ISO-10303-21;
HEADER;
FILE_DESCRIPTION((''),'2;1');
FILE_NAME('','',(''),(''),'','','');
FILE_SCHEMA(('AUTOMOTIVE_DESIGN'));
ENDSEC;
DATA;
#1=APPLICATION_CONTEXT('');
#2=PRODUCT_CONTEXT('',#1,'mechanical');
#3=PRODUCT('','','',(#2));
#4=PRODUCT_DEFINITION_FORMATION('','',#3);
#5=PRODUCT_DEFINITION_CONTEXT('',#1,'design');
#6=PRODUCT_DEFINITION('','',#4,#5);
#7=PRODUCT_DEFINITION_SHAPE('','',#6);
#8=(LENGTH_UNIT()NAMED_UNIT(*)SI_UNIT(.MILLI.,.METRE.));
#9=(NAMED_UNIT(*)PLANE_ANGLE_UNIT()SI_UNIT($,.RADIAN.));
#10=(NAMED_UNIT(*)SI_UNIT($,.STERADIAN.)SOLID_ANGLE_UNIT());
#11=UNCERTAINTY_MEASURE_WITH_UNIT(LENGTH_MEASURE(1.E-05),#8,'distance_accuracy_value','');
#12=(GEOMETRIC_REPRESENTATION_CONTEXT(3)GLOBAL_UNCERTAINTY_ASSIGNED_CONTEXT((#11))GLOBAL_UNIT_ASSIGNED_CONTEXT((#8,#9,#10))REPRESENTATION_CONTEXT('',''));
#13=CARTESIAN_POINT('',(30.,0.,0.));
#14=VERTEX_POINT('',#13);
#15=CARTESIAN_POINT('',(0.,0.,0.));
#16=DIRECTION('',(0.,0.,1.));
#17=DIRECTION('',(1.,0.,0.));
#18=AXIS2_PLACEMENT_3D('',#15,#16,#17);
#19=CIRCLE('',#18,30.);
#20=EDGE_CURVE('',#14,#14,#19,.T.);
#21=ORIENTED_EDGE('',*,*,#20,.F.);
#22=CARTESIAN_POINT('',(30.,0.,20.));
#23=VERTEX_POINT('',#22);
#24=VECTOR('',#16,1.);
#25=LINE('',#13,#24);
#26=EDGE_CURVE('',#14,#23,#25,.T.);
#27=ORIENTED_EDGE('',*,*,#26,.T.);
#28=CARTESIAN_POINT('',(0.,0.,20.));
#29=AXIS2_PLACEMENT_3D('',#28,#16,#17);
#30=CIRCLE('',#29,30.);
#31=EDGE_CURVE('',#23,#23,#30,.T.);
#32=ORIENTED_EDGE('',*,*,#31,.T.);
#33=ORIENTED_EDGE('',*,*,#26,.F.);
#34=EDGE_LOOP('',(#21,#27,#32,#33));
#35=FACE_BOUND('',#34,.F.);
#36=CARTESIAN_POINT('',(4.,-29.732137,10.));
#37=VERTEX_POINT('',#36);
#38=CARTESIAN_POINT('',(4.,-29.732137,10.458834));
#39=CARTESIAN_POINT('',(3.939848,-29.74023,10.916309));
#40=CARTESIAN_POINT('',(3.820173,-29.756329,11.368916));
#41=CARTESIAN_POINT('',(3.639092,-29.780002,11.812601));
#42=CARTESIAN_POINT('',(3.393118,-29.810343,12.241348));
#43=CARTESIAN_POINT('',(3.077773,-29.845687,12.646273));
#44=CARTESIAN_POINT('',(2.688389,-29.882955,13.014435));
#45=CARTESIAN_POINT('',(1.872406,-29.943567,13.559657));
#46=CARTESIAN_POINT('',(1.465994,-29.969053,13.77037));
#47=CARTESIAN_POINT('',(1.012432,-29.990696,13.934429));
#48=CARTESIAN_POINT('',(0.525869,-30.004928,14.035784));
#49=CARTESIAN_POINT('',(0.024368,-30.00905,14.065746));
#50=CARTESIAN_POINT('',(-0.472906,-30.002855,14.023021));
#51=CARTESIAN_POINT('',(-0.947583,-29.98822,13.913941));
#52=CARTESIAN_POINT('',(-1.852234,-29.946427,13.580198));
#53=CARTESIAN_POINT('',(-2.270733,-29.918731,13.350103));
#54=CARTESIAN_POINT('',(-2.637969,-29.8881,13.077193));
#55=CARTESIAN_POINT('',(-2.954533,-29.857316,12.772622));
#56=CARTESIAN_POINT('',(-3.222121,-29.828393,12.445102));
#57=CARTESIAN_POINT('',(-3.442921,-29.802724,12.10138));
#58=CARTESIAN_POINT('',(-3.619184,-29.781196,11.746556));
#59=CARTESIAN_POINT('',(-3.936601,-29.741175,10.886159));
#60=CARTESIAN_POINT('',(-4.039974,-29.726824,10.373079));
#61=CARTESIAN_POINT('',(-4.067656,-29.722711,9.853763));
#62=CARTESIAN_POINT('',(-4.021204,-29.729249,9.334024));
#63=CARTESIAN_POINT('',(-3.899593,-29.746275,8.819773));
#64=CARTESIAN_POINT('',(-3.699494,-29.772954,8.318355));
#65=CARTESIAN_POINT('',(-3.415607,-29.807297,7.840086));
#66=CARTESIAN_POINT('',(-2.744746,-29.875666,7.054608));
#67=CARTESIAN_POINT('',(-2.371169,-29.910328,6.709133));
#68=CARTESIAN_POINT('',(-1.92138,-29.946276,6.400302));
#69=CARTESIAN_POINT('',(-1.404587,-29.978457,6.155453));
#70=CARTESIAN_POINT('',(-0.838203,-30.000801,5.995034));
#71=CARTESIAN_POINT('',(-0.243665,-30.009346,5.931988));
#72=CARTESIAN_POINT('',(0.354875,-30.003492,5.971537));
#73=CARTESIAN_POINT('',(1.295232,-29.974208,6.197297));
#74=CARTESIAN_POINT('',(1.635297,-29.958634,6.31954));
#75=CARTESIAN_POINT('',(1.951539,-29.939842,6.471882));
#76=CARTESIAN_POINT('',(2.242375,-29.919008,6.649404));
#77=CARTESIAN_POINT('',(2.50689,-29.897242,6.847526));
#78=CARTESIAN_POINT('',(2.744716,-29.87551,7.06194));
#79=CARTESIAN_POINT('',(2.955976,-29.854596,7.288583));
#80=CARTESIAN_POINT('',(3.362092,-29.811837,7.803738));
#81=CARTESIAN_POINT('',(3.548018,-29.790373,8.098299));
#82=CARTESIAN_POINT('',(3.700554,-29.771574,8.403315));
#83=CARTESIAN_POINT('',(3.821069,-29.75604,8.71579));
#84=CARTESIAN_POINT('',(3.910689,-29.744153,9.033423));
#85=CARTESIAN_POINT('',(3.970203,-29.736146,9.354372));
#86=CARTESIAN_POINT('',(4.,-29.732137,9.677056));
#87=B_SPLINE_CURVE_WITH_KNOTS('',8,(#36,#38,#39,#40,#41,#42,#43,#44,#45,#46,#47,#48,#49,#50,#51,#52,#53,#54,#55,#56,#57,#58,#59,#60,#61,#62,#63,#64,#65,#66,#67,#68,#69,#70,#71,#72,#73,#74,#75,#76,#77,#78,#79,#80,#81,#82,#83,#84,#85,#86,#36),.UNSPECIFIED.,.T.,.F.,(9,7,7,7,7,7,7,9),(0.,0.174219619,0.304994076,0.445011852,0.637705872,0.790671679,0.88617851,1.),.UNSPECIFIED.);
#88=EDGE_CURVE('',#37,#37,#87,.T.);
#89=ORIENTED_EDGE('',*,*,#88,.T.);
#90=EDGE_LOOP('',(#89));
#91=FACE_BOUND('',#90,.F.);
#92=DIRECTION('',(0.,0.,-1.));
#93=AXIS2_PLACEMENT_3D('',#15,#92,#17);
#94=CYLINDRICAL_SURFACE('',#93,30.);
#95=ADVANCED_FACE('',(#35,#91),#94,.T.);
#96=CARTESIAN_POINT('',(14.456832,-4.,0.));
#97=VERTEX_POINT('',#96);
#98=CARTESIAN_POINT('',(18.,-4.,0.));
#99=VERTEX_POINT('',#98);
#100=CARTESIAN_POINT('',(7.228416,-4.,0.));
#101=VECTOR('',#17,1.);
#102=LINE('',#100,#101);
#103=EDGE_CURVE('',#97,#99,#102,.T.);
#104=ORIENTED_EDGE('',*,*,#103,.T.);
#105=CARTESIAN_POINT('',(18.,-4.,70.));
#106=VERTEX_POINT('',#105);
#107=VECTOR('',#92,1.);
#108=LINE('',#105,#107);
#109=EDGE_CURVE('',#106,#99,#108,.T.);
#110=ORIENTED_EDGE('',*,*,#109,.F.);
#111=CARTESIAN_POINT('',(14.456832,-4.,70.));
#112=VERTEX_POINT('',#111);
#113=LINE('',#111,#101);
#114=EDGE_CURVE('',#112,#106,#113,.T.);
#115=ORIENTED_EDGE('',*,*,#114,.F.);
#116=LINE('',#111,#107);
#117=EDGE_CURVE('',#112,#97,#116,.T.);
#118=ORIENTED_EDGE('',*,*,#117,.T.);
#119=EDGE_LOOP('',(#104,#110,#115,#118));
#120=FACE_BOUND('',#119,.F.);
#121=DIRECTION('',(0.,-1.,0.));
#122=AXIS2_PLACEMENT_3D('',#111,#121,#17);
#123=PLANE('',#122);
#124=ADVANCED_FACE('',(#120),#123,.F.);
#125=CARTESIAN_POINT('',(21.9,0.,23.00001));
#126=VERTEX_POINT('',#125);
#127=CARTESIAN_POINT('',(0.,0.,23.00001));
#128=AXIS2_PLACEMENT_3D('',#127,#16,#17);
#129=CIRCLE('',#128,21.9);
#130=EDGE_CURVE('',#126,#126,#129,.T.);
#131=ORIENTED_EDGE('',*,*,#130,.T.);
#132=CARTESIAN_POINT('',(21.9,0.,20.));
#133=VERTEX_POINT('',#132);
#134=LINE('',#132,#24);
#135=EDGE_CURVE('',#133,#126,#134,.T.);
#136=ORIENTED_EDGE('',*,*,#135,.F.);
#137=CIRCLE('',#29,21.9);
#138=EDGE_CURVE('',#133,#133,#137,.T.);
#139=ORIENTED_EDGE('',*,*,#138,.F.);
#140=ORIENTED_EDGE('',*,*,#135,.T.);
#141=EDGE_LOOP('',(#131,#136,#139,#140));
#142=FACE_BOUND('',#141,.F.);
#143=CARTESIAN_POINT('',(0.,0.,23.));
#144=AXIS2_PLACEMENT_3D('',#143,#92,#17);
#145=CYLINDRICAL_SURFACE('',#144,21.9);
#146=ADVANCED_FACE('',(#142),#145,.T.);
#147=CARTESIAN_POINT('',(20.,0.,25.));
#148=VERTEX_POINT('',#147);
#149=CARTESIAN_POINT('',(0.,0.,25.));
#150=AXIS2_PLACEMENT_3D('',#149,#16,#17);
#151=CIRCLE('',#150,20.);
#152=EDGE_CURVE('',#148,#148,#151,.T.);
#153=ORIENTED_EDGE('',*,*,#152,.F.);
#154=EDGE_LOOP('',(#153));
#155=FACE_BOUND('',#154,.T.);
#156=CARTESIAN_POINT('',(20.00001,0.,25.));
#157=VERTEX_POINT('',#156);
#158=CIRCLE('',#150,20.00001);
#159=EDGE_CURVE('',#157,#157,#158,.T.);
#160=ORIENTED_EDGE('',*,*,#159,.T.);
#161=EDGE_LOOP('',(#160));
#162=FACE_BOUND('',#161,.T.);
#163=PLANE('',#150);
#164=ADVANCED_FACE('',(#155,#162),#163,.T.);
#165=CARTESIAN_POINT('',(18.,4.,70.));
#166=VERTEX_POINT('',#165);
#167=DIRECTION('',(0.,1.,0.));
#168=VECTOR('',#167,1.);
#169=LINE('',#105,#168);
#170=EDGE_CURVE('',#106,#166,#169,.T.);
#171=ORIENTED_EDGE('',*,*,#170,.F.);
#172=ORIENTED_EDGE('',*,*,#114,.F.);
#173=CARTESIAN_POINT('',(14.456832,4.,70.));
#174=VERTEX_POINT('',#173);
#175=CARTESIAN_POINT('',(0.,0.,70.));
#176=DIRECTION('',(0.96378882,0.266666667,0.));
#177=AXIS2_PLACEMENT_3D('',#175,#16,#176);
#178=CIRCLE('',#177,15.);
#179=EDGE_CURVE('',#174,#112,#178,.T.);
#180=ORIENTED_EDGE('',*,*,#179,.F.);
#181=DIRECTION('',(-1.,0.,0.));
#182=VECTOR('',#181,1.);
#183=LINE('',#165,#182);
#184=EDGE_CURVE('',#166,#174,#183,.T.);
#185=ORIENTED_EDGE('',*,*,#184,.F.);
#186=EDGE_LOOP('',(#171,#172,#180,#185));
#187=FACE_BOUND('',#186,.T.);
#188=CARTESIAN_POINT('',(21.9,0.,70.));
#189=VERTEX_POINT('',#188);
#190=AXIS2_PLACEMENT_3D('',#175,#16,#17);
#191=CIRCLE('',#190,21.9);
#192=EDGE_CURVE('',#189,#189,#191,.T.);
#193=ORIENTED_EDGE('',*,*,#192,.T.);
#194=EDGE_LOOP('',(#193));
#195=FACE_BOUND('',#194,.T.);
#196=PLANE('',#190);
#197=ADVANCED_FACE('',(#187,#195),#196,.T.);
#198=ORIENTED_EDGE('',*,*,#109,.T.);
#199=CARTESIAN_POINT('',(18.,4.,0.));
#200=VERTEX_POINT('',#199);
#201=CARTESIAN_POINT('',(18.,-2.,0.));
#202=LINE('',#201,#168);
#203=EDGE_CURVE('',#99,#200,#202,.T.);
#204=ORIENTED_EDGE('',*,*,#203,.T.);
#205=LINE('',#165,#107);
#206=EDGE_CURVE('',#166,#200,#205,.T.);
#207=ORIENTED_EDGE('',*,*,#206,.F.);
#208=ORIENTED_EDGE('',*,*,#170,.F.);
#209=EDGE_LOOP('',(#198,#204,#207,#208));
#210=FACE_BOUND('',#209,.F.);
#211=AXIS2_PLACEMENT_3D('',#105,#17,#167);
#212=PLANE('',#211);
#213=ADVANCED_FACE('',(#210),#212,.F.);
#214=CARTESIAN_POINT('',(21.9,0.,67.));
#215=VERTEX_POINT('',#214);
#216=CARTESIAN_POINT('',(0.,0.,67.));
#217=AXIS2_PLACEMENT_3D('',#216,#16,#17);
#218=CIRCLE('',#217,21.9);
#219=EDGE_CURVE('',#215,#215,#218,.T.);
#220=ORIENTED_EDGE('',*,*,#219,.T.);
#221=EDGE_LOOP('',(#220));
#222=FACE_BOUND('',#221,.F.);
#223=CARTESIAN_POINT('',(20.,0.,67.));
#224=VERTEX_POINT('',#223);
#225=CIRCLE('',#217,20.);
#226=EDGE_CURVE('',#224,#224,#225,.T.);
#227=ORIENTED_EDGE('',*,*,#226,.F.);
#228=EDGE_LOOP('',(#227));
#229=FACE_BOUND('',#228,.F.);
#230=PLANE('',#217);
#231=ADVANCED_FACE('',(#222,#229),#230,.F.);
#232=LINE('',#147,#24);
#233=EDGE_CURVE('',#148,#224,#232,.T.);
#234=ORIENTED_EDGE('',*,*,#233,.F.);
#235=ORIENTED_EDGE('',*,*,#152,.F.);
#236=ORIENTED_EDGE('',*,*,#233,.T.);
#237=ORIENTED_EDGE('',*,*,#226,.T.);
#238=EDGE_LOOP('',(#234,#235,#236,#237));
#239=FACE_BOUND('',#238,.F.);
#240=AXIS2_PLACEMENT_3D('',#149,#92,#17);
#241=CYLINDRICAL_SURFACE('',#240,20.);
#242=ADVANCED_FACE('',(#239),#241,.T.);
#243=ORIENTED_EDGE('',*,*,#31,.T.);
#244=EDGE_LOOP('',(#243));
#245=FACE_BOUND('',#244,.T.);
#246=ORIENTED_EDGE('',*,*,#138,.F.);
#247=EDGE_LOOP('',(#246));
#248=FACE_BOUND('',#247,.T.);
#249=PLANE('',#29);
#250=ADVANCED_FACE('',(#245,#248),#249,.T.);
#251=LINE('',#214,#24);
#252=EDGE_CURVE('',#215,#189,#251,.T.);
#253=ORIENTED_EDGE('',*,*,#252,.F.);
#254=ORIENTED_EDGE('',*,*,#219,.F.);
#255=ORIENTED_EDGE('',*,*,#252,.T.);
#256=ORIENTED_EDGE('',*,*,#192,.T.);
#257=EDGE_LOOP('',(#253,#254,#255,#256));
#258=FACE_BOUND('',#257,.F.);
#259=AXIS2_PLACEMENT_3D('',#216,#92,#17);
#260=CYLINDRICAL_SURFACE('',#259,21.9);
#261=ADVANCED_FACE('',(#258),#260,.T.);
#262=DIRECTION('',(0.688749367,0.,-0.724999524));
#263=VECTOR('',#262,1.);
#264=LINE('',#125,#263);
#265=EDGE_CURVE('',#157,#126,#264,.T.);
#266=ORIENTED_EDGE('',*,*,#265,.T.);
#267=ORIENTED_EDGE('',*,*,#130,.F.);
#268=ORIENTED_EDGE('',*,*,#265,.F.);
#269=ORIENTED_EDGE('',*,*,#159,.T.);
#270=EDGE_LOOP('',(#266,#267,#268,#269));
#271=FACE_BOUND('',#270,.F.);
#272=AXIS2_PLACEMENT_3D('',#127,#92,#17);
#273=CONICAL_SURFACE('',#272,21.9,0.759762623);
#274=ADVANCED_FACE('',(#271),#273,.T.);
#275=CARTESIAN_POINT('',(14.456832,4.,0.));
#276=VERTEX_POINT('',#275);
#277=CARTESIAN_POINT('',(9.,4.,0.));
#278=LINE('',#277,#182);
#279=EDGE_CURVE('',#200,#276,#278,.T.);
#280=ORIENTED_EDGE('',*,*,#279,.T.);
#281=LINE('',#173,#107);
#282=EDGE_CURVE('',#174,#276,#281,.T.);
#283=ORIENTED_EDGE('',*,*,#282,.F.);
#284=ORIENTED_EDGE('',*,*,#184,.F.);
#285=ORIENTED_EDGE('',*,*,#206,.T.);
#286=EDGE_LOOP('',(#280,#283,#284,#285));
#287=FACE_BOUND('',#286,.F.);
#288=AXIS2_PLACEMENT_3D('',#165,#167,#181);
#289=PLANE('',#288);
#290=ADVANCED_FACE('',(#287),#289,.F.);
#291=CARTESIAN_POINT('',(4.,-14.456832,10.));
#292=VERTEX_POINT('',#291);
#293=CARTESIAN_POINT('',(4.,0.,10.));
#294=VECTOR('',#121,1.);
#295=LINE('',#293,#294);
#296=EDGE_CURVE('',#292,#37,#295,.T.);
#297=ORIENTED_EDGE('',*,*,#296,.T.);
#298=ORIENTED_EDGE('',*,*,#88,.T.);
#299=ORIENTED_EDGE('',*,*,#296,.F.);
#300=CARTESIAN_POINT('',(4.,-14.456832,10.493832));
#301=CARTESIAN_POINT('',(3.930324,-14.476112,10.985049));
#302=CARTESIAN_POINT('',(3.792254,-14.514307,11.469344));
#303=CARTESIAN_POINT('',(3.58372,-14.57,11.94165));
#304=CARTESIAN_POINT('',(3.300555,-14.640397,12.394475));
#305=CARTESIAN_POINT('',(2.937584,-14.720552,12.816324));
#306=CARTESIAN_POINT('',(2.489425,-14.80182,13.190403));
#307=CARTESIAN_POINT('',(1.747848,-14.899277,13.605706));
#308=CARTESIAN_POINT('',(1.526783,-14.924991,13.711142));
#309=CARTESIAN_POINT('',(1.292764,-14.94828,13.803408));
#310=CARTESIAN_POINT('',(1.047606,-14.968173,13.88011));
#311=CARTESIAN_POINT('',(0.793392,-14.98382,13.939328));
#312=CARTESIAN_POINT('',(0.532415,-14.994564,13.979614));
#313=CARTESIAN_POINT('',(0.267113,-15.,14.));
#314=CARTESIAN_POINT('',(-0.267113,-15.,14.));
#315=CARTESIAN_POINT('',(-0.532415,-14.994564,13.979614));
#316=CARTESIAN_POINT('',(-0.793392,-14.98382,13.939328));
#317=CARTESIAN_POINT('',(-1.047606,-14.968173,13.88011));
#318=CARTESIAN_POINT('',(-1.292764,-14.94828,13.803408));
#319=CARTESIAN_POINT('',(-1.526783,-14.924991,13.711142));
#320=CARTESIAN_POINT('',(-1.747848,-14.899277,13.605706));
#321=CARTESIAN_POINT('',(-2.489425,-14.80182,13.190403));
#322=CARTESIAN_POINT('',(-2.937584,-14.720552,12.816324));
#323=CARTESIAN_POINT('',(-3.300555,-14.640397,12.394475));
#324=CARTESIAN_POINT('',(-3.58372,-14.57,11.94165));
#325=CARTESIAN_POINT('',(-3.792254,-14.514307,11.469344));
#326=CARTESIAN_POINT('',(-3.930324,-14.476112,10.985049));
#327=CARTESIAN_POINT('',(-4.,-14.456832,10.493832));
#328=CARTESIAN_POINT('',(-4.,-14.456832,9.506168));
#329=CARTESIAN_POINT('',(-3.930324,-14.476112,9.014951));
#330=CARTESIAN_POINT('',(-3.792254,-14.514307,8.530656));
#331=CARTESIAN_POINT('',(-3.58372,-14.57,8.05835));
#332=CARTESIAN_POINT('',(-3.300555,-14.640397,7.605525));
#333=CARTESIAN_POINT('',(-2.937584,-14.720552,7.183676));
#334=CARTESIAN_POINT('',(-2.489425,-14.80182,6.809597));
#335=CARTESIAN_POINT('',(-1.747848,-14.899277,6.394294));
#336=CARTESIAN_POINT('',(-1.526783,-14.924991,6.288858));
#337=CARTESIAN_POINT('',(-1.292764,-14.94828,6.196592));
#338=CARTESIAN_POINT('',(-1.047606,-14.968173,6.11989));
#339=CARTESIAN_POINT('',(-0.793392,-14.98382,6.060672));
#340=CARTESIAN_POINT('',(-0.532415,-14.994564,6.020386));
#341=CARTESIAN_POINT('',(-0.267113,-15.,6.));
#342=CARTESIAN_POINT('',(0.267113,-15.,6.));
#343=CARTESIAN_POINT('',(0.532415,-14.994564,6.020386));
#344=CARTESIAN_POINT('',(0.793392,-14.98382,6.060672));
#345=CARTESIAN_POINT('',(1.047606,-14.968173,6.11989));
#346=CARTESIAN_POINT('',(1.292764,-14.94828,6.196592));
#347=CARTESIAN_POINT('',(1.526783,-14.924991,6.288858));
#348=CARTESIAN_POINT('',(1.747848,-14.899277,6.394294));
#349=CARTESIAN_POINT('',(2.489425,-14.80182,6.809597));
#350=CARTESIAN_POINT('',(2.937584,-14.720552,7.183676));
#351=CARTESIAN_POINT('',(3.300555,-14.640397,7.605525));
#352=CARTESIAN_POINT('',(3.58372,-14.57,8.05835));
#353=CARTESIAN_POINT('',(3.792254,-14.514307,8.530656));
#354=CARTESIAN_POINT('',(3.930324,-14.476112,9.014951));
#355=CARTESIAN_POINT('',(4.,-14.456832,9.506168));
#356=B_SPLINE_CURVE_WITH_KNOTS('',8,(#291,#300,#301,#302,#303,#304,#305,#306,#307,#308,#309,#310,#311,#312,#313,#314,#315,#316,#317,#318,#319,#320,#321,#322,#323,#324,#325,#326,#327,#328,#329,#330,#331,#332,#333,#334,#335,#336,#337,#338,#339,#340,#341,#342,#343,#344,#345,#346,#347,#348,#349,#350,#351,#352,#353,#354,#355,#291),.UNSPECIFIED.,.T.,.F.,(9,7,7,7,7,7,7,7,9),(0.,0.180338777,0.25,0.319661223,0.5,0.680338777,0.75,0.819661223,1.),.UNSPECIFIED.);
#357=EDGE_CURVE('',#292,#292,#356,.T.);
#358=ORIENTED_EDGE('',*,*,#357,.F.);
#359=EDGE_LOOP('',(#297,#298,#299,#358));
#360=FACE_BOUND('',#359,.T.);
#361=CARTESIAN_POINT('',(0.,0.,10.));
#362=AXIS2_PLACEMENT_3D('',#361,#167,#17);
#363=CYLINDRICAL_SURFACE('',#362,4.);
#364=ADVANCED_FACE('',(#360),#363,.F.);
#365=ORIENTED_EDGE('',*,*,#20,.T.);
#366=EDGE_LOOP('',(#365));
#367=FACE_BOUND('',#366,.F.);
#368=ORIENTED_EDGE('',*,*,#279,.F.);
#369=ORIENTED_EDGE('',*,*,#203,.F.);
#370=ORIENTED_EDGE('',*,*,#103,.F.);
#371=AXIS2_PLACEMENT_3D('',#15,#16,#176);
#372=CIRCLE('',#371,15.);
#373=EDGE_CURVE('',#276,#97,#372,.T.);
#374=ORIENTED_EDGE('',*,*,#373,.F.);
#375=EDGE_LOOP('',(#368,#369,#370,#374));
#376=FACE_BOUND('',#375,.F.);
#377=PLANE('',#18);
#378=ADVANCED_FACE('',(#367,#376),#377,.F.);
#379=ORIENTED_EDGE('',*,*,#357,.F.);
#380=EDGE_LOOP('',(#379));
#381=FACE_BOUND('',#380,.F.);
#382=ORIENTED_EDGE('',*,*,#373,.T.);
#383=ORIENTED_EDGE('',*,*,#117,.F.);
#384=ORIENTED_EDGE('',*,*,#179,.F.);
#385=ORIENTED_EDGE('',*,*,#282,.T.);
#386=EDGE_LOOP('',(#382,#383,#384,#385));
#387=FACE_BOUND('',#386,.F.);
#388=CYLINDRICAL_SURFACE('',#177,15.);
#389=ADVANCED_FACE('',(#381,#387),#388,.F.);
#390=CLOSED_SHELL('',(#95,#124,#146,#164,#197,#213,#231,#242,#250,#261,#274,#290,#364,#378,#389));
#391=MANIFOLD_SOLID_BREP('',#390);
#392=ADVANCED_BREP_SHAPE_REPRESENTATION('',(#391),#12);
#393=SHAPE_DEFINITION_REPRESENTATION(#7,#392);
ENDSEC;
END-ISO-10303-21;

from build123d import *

# Parameters (mm, degrees)
F0_R      = 30
F1_DEPTH  = 20
F3_R      = 21.9
F4_DEPTH  = 3
F6_R      = 21.9
F7_DEPTH  = 2
F9_R      = 20
F10_DEPTH = 42
F11_SIZE2 = 1.99999
F11_SIZE  = 1.89999
F12_R     = 21.9
F13_DEPTH = 3
F15_DEPTH = 78
F16_R     = 4
F17_DEPTH = 45


# Not quite as in the source:
# - a fillet or chamfer is up to 0.001 mm smaller than in the source, because OpenCascade refuses the exact size


with BuildPart() as f1:
    # F0 (on Top) → F1 (new body)
    with BuildSketch(Plane.XY):
        Circle(F0_R)
    extrude(amount=F1_DEPTH)

    # F3 (on offset) → F4 (join)
    with BuildSketch(Plane.XY.offset(20)):
        Circle(F3_R)
    extrude(amount=F4_DEPTH)

    # F6 (on offset) → F7 (join)
    with BuildSketch(Plane.XY.offset(23)):
        Circle(F6_R)
    extrude(amount=F7_DEPTH)

    # F9 (on offset) → F10 (join)
    with BuildSketch(Plane.XY.offset(25)):
        Circle(F9_R)
    extrude(amount=F10_DEPTH)

    # F11 (size 1.9 and 2 in the source; OpenCascade refuses exactly that, so slightly less here)
    f11_edges = [f1.edges().sort_by_distance(p)[0] for p in [
        (-21.9, 0, 25),
    ]]
    f11_side = f1.faces().sort_by_distance((-21.280574, 0, 25))[0]
    chamfer(f11_edges, length=F11_SIZE, length2=F11_SIZE2, reference=f11_side)

    # F12 (on face) → F13 (join)
    with BuildSketch(Plane.XY.offset(67)):
        Circle(F12_R)
    extrude(amount=F13_DEPTH)

    # F14 (on face) → F15 (cut)
    with BuildSketch(Plane.XY.offset(70)):
        with BuildLine():
            Line((18, 4), (14.4568322948, 4))
            ThreePointArc((14.4568322948, 4), (-15, 0), (14.4568322948, -4))
            Line((14.4568322948, -4), (18, -4))
            Line((18, -4), (18, 0))
            Line((18, 0), (18, 4))
        make_face()
    extrude(amount=-F15_DEPTH, mode=Mode.SUBTRACT)

    # F16 (on Front) → F17 (cut)
    with BuildSketch(Plane.XZ):
        with Locations((0, 10)):
            Circle(F16_R)
    extrude(amount=F17_DEPTH, mode=Mode.SUBTRACT)


solid = f1.part
